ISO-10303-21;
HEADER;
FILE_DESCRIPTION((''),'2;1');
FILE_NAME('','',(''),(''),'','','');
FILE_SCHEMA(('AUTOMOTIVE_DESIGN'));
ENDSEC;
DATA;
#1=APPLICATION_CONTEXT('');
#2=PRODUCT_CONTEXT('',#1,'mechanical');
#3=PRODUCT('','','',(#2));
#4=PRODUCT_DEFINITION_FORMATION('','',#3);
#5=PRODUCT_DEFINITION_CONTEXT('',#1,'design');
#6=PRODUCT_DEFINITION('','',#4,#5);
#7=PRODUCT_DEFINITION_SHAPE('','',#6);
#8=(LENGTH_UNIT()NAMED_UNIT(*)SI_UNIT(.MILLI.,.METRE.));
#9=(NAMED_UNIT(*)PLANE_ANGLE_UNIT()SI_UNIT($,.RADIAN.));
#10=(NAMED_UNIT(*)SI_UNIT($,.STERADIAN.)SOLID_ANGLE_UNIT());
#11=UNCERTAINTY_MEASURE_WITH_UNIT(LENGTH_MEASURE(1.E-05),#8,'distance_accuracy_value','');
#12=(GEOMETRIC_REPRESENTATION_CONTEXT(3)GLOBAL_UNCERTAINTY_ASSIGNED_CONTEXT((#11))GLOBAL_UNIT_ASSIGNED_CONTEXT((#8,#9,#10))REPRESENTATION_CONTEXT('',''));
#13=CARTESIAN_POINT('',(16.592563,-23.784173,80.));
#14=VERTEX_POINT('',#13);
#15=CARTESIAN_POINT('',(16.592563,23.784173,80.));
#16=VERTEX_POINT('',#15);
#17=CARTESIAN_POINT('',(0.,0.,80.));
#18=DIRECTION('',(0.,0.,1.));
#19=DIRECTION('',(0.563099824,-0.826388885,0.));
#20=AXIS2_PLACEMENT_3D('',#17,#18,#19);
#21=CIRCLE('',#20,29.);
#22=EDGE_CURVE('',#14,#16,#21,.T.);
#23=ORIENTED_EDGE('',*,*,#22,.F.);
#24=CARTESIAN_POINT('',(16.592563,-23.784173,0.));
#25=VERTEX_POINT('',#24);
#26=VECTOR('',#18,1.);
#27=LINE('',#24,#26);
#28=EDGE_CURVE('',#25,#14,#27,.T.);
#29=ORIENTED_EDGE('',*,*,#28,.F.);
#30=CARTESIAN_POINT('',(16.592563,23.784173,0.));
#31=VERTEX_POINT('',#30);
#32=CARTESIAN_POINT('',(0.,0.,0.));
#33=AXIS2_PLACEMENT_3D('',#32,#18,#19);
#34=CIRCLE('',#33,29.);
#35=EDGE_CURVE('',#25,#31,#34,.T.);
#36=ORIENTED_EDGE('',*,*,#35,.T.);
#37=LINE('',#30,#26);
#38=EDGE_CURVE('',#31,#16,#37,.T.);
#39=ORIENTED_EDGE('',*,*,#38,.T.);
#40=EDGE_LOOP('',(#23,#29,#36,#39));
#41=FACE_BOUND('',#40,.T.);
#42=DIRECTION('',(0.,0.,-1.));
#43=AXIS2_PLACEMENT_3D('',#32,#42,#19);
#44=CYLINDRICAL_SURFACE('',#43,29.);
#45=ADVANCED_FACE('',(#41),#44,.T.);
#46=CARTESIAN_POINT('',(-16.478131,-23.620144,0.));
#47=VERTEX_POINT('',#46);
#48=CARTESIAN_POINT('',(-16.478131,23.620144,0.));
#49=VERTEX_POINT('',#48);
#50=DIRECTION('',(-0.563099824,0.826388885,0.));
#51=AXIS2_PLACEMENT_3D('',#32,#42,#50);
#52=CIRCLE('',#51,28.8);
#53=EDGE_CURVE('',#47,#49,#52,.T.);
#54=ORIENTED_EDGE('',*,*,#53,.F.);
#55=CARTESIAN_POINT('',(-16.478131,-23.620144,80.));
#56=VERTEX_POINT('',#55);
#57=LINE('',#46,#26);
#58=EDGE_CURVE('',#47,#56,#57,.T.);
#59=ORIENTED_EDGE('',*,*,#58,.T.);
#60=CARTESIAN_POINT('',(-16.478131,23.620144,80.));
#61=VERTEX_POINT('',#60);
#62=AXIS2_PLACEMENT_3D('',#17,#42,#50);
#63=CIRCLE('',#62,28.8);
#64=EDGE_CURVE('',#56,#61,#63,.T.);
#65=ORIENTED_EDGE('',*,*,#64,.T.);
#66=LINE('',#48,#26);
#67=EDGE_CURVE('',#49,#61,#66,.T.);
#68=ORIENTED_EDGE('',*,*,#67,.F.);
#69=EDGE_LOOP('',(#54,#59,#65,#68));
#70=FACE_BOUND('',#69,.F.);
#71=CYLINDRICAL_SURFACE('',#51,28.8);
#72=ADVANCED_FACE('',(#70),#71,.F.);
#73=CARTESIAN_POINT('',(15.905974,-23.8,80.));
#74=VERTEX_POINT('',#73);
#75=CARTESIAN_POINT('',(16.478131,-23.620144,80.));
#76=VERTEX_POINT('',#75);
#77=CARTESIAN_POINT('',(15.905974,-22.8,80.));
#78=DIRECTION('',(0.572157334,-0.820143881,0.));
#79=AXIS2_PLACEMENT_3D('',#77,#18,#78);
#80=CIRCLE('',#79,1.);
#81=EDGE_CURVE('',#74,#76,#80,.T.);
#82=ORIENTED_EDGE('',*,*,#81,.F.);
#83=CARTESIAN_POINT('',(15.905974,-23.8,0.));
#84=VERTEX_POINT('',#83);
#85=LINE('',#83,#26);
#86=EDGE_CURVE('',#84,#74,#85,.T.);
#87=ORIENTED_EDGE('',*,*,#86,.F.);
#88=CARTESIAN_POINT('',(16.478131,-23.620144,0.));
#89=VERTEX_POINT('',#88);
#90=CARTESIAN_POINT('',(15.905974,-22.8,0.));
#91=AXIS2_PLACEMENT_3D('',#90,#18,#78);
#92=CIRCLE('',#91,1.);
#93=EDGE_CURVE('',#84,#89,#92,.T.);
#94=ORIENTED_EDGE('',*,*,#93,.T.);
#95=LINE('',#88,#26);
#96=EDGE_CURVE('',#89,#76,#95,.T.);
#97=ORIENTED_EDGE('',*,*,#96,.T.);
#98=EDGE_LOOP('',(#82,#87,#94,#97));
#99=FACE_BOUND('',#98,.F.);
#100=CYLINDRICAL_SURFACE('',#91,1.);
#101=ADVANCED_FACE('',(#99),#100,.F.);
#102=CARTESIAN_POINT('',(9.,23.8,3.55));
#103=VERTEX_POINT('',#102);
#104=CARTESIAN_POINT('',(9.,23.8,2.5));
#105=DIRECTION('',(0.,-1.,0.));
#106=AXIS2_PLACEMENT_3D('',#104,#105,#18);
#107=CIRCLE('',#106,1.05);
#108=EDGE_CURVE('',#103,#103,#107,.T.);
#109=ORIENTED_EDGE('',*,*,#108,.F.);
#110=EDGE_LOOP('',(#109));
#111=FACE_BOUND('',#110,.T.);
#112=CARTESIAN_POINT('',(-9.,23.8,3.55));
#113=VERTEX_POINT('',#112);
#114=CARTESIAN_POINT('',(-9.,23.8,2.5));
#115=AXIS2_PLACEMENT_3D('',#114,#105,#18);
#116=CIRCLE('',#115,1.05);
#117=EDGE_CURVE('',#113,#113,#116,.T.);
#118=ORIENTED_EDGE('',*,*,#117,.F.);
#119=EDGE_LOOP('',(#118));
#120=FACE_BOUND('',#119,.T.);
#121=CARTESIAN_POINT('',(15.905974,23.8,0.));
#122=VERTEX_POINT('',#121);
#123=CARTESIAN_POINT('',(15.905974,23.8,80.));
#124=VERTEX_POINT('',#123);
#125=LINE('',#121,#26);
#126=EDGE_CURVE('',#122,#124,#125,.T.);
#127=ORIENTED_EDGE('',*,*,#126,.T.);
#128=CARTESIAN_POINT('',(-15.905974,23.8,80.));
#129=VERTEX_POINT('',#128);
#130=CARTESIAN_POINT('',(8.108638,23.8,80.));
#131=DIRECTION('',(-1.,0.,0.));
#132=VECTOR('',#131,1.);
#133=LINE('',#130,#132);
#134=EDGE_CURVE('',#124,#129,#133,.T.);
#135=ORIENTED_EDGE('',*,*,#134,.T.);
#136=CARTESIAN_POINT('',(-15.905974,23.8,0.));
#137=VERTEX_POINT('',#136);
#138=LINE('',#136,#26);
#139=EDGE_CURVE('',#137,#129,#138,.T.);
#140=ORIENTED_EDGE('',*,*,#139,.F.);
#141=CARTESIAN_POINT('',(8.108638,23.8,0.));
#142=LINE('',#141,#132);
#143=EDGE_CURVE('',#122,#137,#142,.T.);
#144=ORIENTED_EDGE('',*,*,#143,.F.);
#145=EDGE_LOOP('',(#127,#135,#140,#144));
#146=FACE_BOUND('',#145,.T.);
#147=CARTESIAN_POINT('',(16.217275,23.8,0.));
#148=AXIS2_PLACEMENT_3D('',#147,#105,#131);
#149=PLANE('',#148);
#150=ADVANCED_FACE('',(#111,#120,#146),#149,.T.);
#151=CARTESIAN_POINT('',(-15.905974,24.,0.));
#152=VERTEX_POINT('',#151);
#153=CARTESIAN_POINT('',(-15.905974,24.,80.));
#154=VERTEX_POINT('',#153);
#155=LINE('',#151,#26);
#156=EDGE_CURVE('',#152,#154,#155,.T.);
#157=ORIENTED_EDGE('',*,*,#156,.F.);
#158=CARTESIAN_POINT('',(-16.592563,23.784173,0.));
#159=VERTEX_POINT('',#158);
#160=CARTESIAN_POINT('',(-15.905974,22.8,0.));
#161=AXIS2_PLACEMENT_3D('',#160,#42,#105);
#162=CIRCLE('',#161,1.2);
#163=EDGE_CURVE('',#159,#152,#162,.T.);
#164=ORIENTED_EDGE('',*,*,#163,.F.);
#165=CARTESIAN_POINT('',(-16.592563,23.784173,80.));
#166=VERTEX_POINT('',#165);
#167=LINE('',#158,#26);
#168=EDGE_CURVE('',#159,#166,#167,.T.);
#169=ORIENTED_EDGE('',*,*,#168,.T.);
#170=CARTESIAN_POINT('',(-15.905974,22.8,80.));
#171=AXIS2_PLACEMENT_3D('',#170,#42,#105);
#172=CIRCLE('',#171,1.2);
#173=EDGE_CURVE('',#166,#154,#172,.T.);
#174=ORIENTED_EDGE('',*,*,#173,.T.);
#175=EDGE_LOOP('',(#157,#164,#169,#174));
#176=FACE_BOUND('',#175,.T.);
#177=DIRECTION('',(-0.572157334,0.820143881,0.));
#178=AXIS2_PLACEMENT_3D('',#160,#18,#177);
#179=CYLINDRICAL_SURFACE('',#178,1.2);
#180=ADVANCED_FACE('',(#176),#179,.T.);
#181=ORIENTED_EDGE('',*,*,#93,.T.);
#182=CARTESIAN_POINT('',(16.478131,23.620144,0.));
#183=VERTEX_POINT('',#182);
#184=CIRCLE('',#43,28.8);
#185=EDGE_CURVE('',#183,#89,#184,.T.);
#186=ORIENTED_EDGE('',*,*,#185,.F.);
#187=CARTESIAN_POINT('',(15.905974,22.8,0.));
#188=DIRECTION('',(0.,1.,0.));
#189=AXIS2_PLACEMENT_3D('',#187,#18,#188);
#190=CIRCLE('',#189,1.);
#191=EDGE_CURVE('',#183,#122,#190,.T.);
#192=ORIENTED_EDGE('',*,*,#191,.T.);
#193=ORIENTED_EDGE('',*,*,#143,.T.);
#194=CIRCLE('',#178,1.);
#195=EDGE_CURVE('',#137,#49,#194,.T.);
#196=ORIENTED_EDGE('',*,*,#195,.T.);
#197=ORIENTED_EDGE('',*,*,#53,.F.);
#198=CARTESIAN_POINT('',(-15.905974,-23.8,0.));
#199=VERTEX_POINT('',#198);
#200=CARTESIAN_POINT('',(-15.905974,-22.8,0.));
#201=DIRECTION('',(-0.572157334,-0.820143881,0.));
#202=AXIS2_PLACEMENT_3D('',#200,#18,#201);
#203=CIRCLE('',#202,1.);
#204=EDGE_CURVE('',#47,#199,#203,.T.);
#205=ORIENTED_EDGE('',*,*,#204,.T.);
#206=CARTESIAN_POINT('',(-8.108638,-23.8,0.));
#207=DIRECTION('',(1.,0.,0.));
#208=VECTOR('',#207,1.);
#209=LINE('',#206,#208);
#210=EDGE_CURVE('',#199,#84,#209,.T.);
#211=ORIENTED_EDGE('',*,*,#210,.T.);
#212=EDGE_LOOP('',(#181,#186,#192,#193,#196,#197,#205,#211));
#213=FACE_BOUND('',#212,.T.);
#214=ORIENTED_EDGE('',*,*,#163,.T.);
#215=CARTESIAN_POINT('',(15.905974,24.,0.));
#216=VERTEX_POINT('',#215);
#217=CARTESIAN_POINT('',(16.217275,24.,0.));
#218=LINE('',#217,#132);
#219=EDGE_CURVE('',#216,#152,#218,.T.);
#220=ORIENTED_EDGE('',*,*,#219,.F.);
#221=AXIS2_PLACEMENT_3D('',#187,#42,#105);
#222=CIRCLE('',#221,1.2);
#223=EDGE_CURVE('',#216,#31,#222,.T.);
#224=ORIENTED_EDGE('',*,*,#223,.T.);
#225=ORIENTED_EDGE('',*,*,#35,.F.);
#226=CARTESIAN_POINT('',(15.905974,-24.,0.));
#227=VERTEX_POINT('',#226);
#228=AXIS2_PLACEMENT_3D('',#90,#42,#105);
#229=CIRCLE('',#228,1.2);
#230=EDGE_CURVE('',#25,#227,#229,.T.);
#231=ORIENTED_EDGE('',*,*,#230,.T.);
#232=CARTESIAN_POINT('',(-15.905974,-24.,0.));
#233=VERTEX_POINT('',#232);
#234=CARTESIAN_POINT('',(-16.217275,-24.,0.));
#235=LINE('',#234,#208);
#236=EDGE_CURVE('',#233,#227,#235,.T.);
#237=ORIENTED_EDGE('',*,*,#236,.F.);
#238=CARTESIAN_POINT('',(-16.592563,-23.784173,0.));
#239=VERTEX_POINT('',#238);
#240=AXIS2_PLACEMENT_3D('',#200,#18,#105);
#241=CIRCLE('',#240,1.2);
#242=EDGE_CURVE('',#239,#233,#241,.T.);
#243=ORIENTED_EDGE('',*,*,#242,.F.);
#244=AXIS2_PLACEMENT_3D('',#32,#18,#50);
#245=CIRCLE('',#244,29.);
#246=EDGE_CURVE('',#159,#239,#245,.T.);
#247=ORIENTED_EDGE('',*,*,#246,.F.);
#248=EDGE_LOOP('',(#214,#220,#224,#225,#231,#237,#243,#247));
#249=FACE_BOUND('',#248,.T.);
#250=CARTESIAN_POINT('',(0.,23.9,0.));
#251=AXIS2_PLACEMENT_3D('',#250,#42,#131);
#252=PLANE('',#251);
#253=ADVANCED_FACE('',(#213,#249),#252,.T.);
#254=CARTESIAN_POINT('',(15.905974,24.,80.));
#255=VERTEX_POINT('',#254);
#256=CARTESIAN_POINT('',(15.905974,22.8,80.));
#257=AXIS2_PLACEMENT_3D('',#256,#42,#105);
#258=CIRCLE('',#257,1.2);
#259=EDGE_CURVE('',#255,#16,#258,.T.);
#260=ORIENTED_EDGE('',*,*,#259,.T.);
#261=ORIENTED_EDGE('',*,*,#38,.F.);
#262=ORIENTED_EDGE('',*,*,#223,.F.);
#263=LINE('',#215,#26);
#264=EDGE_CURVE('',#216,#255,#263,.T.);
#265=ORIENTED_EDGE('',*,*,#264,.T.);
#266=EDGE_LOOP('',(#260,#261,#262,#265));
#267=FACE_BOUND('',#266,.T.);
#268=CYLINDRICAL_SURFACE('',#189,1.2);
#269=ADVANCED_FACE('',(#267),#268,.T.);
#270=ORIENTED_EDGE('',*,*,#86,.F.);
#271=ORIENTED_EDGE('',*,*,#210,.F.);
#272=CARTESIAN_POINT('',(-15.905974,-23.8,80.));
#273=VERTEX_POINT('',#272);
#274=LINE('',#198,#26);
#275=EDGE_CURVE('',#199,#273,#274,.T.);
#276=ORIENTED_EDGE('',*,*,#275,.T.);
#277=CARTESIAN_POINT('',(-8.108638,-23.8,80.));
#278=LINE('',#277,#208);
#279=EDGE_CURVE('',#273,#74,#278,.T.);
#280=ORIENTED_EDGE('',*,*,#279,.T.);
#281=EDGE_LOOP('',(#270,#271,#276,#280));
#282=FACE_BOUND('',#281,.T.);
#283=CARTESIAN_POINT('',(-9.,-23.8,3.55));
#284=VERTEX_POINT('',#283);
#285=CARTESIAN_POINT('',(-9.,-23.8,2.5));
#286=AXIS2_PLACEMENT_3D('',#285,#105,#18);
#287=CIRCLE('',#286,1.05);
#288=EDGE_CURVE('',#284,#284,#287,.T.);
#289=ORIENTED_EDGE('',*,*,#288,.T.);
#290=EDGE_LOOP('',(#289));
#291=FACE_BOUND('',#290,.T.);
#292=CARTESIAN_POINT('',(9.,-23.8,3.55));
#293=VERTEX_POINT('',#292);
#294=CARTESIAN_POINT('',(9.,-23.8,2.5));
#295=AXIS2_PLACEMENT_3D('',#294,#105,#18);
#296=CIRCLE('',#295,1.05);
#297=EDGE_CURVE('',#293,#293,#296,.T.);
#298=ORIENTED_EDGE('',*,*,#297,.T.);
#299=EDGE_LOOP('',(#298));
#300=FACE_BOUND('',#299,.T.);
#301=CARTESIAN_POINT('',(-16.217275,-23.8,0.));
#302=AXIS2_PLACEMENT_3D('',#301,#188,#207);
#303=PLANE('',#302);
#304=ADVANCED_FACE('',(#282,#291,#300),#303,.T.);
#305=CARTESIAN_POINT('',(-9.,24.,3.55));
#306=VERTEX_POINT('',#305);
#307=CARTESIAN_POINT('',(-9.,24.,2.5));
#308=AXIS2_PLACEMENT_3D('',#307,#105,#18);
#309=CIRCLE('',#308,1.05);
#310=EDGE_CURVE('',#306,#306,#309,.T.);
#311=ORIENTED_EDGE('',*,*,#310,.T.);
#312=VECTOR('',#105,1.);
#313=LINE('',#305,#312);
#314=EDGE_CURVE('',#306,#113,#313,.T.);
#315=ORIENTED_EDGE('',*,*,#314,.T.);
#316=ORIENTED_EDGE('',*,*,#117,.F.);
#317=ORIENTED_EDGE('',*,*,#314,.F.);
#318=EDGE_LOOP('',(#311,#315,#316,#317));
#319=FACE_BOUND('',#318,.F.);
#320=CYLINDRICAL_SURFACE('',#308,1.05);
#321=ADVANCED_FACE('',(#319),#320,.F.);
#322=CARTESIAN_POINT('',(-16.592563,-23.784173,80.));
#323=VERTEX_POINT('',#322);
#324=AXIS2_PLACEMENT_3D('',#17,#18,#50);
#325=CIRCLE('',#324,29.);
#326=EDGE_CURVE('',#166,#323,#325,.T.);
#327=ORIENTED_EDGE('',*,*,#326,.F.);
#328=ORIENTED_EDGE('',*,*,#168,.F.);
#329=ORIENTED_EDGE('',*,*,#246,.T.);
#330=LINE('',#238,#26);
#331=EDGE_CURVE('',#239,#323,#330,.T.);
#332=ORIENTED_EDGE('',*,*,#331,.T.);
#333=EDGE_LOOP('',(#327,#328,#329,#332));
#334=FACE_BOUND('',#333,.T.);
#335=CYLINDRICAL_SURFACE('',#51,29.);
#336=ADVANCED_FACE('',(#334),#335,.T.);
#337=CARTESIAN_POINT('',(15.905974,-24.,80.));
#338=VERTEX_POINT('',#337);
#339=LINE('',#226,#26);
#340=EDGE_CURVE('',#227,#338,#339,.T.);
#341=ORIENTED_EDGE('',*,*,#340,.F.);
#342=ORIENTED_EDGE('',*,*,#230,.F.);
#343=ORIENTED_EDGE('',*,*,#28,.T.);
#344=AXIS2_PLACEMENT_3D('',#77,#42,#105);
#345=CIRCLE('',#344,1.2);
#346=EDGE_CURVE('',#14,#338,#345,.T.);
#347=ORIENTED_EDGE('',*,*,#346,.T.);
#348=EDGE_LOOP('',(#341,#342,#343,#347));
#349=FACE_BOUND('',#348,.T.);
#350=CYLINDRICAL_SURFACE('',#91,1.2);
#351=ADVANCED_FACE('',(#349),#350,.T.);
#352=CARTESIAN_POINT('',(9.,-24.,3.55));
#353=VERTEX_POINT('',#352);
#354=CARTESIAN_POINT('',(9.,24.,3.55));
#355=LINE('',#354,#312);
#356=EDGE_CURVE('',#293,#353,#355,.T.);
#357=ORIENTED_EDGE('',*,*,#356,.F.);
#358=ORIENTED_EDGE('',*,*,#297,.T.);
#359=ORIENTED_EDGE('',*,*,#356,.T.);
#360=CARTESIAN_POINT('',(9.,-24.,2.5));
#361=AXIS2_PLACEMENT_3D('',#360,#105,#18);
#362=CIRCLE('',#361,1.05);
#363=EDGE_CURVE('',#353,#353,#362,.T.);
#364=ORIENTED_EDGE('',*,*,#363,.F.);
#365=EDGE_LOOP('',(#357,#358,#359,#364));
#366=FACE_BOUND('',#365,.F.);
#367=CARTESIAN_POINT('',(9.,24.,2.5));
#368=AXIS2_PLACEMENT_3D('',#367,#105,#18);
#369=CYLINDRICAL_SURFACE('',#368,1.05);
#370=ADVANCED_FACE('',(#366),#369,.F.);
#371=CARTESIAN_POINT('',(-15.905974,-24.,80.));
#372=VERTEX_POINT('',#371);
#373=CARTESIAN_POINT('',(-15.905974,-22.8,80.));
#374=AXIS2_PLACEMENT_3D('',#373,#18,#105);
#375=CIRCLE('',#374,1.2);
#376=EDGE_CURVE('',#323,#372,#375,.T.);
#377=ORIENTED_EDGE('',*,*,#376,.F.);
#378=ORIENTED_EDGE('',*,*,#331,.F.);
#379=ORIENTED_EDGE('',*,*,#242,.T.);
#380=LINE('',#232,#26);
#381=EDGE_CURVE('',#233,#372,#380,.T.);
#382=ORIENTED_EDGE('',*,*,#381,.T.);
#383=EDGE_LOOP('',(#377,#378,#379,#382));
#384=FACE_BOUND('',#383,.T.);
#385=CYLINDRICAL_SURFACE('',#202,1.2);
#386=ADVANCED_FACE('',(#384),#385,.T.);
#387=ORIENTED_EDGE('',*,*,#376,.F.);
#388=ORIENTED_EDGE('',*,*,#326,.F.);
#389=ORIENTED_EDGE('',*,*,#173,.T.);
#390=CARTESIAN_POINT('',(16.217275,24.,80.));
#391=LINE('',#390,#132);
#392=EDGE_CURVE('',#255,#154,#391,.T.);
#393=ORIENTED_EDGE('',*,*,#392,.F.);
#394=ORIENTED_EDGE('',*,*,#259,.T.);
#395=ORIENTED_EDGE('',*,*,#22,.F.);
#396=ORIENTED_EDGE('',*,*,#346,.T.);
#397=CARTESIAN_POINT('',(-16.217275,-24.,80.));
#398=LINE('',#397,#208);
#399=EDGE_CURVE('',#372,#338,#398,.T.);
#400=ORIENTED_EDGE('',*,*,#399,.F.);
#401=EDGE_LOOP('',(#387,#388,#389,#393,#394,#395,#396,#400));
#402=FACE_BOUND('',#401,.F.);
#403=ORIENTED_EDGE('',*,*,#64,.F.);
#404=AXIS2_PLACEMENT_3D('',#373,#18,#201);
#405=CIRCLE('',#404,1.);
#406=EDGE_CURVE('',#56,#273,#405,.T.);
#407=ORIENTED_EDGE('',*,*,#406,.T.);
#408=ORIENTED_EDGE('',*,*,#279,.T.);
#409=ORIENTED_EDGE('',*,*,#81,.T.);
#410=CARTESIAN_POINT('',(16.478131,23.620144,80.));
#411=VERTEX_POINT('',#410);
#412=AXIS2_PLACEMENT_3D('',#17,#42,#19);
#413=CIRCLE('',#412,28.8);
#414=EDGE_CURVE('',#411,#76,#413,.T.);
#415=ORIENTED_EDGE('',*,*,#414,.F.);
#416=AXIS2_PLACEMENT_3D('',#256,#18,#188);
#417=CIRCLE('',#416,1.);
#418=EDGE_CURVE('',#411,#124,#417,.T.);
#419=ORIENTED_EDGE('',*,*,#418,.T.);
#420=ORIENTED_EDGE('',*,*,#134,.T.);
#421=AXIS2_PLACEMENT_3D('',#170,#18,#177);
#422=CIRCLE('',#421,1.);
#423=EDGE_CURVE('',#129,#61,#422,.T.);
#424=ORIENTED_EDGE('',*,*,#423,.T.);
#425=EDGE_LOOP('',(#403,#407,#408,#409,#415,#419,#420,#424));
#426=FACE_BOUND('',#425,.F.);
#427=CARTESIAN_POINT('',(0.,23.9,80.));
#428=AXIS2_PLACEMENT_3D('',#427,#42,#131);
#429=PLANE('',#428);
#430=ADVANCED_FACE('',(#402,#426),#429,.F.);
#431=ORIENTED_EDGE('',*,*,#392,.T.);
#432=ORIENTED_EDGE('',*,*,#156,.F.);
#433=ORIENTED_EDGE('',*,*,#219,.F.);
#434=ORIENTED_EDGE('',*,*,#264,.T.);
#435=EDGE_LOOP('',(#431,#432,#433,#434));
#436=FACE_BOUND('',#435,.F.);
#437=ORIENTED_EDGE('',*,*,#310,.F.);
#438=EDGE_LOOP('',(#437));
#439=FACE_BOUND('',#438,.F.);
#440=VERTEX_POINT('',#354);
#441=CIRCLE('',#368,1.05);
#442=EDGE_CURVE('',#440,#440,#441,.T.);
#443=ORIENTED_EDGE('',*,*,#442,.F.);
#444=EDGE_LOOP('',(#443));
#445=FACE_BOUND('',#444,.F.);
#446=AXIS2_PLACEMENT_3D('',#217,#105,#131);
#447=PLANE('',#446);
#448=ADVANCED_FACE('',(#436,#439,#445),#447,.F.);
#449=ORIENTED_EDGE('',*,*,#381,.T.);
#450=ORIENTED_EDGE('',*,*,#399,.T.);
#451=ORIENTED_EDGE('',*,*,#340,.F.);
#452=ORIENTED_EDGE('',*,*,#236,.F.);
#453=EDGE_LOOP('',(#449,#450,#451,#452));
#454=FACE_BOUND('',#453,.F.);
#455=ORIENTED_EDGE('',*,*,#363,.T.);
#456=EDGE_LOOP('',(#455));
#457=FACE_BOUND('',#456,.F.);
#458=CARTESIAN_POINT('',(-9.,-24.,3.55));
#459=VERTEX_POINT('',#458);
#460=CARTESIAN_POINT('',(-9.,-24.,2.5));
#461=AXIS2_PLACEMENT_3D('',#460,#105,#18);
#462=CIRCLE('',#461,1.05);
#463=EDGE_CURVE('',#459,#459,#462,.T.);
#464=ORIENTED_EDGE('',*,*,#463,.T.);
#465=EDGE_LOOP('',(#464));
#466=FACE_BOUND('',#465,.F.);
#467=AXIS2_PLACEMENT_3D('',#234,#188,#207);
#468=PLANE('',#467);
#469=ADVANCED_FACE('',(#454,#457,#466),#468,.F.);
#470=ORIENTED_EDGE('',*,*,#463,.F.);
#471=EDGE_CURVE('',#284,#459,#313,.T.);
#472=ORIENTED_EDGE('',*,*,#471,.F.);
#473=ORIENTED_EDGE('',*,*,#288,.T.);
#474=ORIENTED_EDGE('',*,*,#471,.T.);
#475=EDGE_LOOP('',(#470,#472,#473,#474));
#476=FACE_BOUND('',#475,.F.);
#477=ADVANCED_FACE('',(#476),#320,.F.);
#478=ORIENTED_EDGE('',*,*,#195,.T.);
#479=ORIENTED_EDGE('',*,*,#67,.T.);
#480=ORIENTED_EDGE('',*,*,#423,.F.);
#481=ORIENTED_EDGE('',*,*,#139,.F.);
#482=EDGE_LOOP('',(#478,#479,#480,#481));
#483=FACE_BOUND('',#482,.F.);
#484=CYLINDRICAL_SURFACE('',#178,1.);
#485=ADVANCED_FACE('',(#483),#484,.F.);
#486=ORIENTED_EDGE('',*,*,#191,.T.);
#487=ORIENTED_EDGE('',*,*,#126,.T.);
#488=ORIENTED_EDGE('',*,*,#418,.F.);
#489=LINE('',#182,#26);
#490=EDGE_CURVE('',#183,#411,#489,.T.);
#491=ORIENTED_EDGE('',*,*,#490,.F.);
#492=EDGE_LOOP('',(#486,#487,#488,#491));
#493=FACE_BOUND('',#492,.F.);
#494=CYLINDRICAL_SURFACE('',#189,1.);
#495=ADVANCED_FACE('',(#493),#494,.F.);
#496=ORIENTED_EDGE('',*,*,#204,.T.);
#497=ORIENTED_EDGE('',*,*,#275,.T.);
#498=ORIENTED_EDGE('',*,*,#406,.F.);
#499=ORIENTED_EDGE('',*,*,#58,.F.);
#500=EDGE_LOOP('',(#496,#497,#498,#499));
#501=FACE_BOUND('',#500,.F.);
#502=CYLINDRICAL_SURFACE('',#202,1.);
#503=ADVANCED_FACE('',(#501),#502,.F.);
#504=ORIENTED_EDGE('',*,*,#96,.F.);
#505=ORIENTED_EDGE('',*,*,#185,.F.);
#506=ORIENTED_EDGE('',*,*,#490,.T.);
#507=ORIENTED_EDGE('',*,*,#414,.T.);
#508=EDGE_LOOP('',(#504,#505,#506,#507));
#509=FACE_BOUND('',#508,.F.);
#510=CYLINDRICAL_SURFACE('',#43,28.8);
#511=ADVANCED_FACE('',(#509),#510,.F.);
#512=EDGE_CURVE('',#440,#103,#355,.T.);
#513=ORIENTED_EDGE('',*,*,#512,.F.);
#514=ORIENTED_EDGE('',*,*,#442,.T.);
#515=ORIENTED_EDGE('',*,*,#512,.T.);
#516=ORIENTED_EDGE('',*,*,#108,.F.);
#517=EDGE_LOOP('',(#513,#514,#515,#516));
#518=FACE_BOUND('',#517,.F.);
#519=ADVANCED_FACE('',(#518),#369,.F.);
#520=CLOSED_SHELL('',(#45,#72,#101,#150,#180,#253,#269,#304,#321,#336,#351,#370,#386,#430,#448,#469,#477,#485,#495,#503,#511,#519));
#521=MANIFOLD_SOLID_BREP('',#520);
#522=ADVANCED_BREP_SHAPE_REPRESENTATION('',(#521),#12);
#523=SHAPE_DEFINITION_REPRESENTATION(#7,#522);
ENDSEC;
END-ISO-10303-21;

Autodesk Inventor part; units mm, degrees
ref_plane "YZ Plane" through (0, 0, 0) normal (1, 0, 0) x (0, 1, 0)
ref_plane "XZ Plane" through (0, 0, 0) normal (0, 1, 0) x (-1, 0, 0)
ref_plane "XY Plane" through (0, 0, 0) normal (0, 0, 1) x (1, 0, 0)
sketch "Sketch1" plane through (0, 0, 0) normal (0, 0, 1) x (1, 0, 0)
  circle A0 centre (0, 0) radius 28.8
  line L0 (-50, 23.8) -> (50, 23.8)
  line L1 (50, 23.8) -> (50, -23.8)
  line L2 (50, -23.8) -> (-50, -23.8)
  line L3 (-50, -23.8) -> (-50, 23.8)
  point P0 (50, 0)
  point P1 (0, 23.8)
  point P2 (-16.217275, -23.8)
  point P3 (16.217275, -23.8)
  point P4 (16.217275, 23.8)
  point P5 (-16.217275, 23.8)
  dimension "d0" = 57.6
  dimension "d1" = 47.6
  dimension "d2" = 100
sketch "Sketch1 outline for Extrusion1" plane through (0, 0, 0) normal (0, 0, 1) x (1, 0, 0)
  line L0 (-16.217275, -23.8) -> (16.217275, -23.8)
  arc A0 (-16.217275, 23.8) -> (-16.217275, -23.8) centre (0, 0) ccw
  line L1 (16.217275, 23.8) -> (-16.217275, 23.8)
  arc A1 (16.217275, -23.8) -> (16.217275, 23.8) centre (0, 0) ccw
extrude "Extrusion1" add sketch "Sketch1 outline for Extrusion1" along normal blind 80
fillet "Fillet1" radius 1 4 edges at (-16.2173, 23.8, 40) (16.2173, 23.8, 40) (16.2173, -23.8, 40) (-16.2173, -23.8, 40)
thicken "Thicken1" operation add thickness 0.2 both sides no extend neighbours no toward (0, 1, 0) faces at (5.301991, 23.8, 26.666667) (-16.040924, 23.790852, 26.666667) (-27.332956, -9.074665, 53.333333) (16.237959, 23.743284, 26.666667) (28.430873, 4.596242, 53.333333) (16.362219, -23.689854, 26.666667) (-5.301991, -23.8, 26.666667) (-16.362219, -23.689854, 26.666667)
shell "Shell1" thickness 0.2 removed faces 2 at (-5.301991, -8, 80) at (-5.301991, -8, 0)
sketch "Sketch2" plane through (-19.580613, 24, 0) normal (0, 1, 0) x (1, 0, 0)
  line L0 (10.580613, -2.5) -> (28.580613, -2.5) construction
  line L1 (35.486587, 0) -> (3.674639, 0)
  point P0 (19.580613, 0)
  point P1 (31.432467, 0)
  point P2 (0, 0)
  point P3 (19.580613, -2.5)
  point P4 (19.580613, 0)
  point P5 (27.757828, 0)
  point P6 (19.580613, 0)
  dimension "d9" = 18
  dimension "d10" = 2.5
hole "Hole1" at (-9, 24, 2.5) at (9, 24, 2.5) direction (0, -1, 0) diameter 2.1 end through all
equation "\"d0\" = phi + 2 * slack"
equation "\"d1\" = flat_width + 2 * slack"
equation "\"flat_width\" = 44"
equation "\"phi\" = 54"
equation "\"slack\" = 1.8"
properties part number "probe-side-large-mesh" material "Stainless Steel"
